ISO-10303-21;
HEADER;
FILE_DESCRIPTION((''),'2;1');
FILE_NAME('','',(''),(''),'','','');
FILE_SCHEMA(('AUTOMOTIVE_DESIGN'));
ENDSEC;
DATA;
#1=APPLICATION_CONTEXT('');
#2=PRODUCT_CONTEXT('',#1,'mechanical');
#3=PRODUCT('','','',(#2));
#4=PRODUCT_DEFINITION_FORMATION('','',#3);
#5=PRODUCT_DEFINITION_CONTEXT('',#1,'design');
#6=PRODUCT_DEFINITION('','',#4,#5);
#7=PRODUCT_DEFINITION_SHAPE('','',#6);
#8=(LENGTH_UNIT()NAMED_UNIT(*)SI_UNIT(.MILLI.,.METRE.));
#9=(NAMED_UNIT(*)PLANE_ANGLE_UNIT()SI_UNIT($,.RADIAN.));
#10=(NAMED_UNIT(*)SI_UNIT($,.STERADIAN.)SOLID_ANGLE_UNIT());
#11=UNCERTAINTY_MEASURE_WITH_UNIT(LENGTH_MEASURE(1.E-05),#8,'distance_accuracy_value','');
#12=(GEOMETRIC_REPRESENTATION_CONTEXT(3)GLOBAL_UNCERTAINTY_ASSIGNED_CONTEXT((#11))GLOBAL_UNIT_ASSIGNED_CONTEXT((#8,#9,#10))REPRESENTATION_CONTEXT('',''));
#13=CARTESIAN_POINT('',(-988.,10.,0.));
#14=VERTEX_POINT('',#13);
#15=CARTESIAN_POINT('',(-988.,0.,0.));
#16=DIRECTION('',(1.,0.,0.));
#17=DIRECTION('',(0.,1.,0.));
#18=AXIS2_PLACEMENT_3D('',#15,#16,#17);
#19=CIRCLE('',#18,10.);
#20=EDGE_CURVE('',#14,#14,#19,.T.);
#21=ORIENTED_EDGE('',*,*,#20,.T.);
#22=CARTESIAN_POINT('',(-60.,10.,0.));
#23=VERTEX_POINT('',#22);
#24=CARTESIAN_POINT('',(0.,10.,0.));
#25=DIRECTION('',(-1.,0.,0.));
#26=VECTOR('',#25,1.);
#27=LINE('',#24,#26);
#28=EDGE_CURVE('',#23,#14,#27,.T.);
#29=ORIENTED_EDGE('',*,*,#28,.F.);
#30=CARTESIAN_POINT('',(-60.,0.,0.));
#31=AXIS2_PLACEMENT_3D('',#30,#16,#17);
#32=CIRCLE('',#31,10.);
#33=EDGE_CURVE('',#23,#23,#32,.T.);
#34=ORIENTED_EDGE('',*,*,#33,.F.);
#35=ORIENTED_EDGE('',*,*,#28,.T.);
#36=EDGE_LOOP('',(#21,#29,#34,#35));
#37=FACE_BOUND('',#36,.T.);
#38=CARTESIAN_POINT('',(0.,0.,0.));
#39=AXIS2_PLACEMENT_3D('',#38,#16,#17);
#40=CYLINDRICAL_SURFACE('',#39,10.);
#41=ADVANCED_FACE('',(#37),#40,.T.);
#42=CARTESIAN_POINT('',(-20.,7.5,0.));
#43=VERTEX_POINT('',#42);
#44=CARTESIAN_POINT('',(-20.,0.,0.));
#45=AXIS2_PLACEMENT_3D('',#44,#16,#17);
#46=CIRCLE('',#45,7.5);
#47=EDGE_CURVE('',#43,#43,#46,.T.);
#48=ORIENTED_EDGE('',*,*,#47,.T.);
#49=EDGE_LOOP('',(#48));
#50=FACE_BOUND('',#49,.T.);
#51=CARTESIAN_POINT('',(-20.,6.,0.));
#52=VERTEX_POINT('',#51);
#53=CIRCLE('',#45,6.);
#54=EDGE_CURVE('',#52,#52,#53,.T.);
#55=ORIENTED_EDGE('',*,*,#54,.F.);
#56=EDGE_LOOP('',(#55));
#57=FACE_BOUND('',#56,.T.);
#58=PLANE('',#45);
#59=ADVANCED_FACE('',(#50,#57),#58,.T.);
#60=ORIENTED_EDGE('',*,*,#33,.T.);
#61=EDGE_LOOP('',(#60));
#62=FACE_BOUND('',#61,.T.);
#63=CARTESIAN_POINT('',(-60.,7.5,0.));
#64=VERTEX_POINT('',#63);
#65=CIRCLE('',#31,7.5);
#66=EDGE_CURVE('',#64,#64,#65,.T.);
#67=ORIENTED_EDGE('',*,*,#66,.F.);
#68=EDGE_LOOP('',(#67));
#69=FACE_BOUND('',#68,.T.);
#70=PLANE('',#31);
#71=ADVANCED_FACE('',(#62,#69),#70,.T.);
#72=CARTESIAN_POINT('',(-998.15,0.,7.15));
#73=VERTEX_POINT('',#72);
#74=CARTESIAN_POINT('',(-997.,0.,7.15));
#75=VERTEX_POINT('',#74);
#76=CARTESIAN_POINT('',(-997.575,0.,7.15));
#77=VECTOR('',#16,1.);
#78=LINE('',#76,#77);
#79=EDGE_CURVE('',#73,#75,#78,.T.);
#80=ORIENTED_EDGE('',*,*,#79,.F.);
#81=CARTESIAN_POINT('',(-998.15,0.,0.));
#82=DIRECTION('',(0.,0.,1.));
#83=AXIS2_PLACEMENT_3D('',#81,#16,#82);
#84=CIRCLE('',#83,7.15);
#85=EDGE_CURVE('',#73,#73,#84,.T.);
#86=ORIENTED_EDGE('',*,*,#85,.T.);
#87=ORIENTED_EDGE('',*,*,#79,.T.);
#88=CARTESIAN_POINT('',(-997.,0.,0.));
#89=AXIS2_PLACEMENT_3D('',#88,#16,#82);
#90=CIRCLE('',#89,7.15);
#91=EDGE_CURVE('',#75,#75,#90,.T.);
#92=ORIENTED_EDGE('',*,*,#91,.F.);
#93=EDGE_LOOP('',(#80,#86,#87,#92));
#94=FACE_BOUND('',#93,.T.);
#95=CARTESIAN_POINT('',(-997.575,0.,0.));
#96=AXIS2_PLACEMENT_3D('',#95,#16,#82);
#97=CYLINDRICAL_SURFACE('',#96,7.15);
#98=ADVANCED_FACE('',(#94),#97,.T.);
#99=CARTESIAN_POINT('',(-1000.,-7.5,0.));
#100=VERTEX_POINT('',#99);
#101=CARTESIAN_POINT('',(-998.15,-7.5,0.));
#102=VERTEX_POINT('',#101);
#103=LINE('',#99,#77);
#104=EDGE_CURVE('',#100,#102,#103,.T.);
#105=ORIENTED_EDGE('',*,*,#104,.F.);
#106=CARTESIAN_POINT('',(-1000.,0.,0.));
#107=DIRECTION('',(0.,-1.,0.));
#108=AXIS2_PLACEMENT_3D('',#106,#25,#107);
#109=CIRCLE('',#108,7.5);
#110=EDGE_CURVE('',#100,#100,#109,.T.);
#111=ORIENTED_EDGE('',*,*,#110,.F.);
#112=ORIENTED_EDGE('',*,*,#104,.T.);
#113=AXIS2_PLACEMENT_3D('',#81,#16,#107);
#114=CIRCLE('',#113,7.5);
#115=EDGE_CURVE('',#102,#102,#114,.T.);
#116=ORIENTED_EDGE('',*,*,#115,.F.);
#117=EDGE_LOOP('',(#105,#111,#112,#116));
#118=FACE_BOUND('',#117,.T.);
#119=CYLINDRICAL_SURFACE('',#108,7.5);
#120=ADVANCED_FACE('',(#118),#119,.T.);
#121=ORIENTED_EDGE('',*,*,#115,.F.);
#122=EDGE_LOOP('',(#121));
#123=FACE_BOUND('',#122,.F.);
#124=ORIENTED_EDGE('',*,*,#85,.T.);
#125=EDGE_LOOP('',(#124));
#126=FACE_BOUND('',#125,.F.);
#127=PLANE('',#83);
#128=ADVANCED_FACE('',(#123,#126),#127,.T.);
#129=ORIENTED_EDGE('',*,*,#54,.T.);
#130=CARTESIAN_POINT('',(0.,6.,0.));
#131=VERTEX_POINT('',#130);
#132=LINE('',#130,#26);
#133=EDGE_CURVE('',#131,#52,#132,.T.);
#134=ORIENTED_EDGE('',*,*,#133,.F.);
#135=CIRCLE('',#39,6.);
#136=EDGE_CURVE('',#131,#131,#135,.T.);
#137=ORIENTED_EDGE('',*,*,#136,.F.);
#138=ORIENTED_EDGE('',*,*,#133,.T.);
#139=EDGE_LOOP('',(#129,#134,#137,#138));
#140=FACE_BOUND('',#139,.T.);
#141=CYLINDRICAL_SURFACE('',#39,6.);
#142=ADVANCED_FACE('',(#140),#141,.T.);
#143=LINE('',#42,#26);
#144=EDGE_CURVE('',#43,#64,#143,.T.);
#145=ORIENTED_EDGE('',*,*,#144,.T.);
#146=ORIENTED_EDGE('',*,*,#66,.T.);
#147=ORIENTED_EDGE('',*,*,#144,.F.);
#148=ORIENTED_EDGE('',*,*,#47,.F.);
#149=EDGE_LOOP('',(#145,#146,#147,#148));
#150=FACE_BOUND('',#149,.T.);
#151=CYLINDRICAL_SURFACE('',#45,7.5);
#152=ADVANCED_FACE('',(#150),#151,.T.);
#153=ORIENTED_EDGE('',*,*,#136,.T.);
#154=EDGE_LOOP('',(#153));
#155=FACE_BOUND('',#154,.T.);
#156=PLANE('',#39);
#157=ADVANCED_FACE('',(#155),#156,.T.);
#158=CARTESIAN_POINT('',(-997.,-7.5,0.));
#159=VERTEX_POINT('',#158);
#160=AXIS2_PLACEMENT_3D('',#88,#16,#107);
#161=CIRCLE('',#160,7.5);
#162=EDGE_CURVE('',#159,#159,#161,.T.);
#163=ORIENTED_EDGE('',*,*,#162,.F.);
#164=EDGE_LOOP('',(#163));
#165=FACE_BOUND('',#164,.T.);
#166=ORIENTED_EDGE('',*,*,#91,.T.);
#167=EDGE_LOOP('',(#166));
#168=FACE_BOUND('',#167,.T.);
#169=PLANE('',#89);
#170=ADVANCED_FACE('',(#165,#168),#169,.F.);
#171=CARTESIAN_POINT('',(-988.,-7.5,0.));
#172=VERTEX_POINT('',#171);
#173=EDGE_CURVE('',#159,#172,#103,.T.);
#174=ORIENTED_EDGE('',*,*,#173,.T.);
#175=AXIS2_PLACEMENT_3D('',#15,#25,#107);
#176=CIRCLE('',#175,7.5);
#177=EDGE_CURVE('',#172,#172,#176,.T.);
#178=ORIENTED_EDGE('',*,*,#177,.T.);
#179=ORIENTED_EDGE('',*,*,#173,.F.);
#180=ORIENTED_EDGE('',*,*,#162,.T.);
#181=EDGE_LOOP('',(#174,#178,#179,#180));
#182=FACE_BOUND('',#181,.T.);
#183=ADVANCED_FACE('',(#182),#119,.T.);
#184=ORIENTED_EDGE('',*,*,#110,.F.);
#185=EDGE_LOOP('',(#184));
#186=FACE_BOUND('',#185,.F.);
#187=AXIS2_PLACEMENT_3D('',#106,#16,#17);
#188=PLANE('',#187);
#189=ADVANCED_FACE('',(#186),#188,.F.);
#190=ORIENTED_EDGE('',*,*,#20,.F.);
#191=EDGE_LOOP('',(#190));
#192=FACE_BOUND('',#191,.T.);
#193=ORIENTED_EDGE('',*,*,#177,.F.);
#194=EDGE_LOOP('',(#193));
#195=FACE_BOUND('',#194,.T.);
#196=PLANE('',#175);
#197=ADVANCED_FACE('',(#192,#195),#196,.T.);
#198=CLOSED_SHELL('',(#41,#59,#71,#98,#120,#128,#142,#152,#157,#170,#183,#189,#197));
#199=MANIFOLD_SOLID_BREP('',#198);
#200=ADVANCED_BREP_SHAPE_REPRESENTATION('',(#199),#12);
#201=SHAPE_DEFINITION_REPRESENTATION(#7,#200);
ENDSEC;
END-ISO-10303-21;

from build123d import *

# Parameters (mm, degrees)
F0_R     = 10
F1_DEPTH = 1000
F2_R     = 10
F2_R_2   = 6
F3_DEPTH = 20
F4_R     = 10
F4_R_2   = 7.5
F5_DEPTH = 40
F6_R     = 10
F6_R_2   = 7.5
F7_DEPTH = 12
F8_W     = 1.15
F8_H     = 0.35


with BuildPart() as f1:
    # F0 (on Right) → F1 (new body)
    with BuildSketch(Plane.YZ):
        Circle(F0_R)
    extrude(amount=-F1_DEPTH)

    # F2 (on face) → F3 (cut)
    with BuildSketch(Plane.YZ):
        Circle(F2_R)
        Circle(F2_R_2, mode=Mode.SUBTRACT)
    extrude(amount=-F3_DEPTH, mode=Mode.SUBTRACT)

    # F4 (on face) → F5 (cut)
    with BuildSketch(Plane.YZ.offset(-20)):
        Circle(F4_R)
        Circle(F4_R_2, mode=Mode.SUBTRACT)
    extrude(amount=-F5_DEPTH, mode=Mode.SUBTRACT)

    # F6 (on face) → F7 (cut)
    with BuildSketch(Plane(origin=(-1000, 0, 0), x_dir=(0, -1, 0), z_dir=(-1, 0, 0))):
        Circle(F6_R)
        Circle(F6_R_2, mode=Mode.SUBTRACT)
    extrude(amount=-F7_DEPTH, mode=Mode.SUBTRACT)

    # F8 (on Front) → F9 (revolve, cut)
    with BuildSketch(Plane.XZ):
        with Locations((-997.575, 7.325)):
            Rectangle(F8_W, F8_H)
    revolve(axis=Axis((-986.6362512112, 0, 0), (1, 0, 0)), mode=Mode.SUBTRACT)


solid = f1.part
